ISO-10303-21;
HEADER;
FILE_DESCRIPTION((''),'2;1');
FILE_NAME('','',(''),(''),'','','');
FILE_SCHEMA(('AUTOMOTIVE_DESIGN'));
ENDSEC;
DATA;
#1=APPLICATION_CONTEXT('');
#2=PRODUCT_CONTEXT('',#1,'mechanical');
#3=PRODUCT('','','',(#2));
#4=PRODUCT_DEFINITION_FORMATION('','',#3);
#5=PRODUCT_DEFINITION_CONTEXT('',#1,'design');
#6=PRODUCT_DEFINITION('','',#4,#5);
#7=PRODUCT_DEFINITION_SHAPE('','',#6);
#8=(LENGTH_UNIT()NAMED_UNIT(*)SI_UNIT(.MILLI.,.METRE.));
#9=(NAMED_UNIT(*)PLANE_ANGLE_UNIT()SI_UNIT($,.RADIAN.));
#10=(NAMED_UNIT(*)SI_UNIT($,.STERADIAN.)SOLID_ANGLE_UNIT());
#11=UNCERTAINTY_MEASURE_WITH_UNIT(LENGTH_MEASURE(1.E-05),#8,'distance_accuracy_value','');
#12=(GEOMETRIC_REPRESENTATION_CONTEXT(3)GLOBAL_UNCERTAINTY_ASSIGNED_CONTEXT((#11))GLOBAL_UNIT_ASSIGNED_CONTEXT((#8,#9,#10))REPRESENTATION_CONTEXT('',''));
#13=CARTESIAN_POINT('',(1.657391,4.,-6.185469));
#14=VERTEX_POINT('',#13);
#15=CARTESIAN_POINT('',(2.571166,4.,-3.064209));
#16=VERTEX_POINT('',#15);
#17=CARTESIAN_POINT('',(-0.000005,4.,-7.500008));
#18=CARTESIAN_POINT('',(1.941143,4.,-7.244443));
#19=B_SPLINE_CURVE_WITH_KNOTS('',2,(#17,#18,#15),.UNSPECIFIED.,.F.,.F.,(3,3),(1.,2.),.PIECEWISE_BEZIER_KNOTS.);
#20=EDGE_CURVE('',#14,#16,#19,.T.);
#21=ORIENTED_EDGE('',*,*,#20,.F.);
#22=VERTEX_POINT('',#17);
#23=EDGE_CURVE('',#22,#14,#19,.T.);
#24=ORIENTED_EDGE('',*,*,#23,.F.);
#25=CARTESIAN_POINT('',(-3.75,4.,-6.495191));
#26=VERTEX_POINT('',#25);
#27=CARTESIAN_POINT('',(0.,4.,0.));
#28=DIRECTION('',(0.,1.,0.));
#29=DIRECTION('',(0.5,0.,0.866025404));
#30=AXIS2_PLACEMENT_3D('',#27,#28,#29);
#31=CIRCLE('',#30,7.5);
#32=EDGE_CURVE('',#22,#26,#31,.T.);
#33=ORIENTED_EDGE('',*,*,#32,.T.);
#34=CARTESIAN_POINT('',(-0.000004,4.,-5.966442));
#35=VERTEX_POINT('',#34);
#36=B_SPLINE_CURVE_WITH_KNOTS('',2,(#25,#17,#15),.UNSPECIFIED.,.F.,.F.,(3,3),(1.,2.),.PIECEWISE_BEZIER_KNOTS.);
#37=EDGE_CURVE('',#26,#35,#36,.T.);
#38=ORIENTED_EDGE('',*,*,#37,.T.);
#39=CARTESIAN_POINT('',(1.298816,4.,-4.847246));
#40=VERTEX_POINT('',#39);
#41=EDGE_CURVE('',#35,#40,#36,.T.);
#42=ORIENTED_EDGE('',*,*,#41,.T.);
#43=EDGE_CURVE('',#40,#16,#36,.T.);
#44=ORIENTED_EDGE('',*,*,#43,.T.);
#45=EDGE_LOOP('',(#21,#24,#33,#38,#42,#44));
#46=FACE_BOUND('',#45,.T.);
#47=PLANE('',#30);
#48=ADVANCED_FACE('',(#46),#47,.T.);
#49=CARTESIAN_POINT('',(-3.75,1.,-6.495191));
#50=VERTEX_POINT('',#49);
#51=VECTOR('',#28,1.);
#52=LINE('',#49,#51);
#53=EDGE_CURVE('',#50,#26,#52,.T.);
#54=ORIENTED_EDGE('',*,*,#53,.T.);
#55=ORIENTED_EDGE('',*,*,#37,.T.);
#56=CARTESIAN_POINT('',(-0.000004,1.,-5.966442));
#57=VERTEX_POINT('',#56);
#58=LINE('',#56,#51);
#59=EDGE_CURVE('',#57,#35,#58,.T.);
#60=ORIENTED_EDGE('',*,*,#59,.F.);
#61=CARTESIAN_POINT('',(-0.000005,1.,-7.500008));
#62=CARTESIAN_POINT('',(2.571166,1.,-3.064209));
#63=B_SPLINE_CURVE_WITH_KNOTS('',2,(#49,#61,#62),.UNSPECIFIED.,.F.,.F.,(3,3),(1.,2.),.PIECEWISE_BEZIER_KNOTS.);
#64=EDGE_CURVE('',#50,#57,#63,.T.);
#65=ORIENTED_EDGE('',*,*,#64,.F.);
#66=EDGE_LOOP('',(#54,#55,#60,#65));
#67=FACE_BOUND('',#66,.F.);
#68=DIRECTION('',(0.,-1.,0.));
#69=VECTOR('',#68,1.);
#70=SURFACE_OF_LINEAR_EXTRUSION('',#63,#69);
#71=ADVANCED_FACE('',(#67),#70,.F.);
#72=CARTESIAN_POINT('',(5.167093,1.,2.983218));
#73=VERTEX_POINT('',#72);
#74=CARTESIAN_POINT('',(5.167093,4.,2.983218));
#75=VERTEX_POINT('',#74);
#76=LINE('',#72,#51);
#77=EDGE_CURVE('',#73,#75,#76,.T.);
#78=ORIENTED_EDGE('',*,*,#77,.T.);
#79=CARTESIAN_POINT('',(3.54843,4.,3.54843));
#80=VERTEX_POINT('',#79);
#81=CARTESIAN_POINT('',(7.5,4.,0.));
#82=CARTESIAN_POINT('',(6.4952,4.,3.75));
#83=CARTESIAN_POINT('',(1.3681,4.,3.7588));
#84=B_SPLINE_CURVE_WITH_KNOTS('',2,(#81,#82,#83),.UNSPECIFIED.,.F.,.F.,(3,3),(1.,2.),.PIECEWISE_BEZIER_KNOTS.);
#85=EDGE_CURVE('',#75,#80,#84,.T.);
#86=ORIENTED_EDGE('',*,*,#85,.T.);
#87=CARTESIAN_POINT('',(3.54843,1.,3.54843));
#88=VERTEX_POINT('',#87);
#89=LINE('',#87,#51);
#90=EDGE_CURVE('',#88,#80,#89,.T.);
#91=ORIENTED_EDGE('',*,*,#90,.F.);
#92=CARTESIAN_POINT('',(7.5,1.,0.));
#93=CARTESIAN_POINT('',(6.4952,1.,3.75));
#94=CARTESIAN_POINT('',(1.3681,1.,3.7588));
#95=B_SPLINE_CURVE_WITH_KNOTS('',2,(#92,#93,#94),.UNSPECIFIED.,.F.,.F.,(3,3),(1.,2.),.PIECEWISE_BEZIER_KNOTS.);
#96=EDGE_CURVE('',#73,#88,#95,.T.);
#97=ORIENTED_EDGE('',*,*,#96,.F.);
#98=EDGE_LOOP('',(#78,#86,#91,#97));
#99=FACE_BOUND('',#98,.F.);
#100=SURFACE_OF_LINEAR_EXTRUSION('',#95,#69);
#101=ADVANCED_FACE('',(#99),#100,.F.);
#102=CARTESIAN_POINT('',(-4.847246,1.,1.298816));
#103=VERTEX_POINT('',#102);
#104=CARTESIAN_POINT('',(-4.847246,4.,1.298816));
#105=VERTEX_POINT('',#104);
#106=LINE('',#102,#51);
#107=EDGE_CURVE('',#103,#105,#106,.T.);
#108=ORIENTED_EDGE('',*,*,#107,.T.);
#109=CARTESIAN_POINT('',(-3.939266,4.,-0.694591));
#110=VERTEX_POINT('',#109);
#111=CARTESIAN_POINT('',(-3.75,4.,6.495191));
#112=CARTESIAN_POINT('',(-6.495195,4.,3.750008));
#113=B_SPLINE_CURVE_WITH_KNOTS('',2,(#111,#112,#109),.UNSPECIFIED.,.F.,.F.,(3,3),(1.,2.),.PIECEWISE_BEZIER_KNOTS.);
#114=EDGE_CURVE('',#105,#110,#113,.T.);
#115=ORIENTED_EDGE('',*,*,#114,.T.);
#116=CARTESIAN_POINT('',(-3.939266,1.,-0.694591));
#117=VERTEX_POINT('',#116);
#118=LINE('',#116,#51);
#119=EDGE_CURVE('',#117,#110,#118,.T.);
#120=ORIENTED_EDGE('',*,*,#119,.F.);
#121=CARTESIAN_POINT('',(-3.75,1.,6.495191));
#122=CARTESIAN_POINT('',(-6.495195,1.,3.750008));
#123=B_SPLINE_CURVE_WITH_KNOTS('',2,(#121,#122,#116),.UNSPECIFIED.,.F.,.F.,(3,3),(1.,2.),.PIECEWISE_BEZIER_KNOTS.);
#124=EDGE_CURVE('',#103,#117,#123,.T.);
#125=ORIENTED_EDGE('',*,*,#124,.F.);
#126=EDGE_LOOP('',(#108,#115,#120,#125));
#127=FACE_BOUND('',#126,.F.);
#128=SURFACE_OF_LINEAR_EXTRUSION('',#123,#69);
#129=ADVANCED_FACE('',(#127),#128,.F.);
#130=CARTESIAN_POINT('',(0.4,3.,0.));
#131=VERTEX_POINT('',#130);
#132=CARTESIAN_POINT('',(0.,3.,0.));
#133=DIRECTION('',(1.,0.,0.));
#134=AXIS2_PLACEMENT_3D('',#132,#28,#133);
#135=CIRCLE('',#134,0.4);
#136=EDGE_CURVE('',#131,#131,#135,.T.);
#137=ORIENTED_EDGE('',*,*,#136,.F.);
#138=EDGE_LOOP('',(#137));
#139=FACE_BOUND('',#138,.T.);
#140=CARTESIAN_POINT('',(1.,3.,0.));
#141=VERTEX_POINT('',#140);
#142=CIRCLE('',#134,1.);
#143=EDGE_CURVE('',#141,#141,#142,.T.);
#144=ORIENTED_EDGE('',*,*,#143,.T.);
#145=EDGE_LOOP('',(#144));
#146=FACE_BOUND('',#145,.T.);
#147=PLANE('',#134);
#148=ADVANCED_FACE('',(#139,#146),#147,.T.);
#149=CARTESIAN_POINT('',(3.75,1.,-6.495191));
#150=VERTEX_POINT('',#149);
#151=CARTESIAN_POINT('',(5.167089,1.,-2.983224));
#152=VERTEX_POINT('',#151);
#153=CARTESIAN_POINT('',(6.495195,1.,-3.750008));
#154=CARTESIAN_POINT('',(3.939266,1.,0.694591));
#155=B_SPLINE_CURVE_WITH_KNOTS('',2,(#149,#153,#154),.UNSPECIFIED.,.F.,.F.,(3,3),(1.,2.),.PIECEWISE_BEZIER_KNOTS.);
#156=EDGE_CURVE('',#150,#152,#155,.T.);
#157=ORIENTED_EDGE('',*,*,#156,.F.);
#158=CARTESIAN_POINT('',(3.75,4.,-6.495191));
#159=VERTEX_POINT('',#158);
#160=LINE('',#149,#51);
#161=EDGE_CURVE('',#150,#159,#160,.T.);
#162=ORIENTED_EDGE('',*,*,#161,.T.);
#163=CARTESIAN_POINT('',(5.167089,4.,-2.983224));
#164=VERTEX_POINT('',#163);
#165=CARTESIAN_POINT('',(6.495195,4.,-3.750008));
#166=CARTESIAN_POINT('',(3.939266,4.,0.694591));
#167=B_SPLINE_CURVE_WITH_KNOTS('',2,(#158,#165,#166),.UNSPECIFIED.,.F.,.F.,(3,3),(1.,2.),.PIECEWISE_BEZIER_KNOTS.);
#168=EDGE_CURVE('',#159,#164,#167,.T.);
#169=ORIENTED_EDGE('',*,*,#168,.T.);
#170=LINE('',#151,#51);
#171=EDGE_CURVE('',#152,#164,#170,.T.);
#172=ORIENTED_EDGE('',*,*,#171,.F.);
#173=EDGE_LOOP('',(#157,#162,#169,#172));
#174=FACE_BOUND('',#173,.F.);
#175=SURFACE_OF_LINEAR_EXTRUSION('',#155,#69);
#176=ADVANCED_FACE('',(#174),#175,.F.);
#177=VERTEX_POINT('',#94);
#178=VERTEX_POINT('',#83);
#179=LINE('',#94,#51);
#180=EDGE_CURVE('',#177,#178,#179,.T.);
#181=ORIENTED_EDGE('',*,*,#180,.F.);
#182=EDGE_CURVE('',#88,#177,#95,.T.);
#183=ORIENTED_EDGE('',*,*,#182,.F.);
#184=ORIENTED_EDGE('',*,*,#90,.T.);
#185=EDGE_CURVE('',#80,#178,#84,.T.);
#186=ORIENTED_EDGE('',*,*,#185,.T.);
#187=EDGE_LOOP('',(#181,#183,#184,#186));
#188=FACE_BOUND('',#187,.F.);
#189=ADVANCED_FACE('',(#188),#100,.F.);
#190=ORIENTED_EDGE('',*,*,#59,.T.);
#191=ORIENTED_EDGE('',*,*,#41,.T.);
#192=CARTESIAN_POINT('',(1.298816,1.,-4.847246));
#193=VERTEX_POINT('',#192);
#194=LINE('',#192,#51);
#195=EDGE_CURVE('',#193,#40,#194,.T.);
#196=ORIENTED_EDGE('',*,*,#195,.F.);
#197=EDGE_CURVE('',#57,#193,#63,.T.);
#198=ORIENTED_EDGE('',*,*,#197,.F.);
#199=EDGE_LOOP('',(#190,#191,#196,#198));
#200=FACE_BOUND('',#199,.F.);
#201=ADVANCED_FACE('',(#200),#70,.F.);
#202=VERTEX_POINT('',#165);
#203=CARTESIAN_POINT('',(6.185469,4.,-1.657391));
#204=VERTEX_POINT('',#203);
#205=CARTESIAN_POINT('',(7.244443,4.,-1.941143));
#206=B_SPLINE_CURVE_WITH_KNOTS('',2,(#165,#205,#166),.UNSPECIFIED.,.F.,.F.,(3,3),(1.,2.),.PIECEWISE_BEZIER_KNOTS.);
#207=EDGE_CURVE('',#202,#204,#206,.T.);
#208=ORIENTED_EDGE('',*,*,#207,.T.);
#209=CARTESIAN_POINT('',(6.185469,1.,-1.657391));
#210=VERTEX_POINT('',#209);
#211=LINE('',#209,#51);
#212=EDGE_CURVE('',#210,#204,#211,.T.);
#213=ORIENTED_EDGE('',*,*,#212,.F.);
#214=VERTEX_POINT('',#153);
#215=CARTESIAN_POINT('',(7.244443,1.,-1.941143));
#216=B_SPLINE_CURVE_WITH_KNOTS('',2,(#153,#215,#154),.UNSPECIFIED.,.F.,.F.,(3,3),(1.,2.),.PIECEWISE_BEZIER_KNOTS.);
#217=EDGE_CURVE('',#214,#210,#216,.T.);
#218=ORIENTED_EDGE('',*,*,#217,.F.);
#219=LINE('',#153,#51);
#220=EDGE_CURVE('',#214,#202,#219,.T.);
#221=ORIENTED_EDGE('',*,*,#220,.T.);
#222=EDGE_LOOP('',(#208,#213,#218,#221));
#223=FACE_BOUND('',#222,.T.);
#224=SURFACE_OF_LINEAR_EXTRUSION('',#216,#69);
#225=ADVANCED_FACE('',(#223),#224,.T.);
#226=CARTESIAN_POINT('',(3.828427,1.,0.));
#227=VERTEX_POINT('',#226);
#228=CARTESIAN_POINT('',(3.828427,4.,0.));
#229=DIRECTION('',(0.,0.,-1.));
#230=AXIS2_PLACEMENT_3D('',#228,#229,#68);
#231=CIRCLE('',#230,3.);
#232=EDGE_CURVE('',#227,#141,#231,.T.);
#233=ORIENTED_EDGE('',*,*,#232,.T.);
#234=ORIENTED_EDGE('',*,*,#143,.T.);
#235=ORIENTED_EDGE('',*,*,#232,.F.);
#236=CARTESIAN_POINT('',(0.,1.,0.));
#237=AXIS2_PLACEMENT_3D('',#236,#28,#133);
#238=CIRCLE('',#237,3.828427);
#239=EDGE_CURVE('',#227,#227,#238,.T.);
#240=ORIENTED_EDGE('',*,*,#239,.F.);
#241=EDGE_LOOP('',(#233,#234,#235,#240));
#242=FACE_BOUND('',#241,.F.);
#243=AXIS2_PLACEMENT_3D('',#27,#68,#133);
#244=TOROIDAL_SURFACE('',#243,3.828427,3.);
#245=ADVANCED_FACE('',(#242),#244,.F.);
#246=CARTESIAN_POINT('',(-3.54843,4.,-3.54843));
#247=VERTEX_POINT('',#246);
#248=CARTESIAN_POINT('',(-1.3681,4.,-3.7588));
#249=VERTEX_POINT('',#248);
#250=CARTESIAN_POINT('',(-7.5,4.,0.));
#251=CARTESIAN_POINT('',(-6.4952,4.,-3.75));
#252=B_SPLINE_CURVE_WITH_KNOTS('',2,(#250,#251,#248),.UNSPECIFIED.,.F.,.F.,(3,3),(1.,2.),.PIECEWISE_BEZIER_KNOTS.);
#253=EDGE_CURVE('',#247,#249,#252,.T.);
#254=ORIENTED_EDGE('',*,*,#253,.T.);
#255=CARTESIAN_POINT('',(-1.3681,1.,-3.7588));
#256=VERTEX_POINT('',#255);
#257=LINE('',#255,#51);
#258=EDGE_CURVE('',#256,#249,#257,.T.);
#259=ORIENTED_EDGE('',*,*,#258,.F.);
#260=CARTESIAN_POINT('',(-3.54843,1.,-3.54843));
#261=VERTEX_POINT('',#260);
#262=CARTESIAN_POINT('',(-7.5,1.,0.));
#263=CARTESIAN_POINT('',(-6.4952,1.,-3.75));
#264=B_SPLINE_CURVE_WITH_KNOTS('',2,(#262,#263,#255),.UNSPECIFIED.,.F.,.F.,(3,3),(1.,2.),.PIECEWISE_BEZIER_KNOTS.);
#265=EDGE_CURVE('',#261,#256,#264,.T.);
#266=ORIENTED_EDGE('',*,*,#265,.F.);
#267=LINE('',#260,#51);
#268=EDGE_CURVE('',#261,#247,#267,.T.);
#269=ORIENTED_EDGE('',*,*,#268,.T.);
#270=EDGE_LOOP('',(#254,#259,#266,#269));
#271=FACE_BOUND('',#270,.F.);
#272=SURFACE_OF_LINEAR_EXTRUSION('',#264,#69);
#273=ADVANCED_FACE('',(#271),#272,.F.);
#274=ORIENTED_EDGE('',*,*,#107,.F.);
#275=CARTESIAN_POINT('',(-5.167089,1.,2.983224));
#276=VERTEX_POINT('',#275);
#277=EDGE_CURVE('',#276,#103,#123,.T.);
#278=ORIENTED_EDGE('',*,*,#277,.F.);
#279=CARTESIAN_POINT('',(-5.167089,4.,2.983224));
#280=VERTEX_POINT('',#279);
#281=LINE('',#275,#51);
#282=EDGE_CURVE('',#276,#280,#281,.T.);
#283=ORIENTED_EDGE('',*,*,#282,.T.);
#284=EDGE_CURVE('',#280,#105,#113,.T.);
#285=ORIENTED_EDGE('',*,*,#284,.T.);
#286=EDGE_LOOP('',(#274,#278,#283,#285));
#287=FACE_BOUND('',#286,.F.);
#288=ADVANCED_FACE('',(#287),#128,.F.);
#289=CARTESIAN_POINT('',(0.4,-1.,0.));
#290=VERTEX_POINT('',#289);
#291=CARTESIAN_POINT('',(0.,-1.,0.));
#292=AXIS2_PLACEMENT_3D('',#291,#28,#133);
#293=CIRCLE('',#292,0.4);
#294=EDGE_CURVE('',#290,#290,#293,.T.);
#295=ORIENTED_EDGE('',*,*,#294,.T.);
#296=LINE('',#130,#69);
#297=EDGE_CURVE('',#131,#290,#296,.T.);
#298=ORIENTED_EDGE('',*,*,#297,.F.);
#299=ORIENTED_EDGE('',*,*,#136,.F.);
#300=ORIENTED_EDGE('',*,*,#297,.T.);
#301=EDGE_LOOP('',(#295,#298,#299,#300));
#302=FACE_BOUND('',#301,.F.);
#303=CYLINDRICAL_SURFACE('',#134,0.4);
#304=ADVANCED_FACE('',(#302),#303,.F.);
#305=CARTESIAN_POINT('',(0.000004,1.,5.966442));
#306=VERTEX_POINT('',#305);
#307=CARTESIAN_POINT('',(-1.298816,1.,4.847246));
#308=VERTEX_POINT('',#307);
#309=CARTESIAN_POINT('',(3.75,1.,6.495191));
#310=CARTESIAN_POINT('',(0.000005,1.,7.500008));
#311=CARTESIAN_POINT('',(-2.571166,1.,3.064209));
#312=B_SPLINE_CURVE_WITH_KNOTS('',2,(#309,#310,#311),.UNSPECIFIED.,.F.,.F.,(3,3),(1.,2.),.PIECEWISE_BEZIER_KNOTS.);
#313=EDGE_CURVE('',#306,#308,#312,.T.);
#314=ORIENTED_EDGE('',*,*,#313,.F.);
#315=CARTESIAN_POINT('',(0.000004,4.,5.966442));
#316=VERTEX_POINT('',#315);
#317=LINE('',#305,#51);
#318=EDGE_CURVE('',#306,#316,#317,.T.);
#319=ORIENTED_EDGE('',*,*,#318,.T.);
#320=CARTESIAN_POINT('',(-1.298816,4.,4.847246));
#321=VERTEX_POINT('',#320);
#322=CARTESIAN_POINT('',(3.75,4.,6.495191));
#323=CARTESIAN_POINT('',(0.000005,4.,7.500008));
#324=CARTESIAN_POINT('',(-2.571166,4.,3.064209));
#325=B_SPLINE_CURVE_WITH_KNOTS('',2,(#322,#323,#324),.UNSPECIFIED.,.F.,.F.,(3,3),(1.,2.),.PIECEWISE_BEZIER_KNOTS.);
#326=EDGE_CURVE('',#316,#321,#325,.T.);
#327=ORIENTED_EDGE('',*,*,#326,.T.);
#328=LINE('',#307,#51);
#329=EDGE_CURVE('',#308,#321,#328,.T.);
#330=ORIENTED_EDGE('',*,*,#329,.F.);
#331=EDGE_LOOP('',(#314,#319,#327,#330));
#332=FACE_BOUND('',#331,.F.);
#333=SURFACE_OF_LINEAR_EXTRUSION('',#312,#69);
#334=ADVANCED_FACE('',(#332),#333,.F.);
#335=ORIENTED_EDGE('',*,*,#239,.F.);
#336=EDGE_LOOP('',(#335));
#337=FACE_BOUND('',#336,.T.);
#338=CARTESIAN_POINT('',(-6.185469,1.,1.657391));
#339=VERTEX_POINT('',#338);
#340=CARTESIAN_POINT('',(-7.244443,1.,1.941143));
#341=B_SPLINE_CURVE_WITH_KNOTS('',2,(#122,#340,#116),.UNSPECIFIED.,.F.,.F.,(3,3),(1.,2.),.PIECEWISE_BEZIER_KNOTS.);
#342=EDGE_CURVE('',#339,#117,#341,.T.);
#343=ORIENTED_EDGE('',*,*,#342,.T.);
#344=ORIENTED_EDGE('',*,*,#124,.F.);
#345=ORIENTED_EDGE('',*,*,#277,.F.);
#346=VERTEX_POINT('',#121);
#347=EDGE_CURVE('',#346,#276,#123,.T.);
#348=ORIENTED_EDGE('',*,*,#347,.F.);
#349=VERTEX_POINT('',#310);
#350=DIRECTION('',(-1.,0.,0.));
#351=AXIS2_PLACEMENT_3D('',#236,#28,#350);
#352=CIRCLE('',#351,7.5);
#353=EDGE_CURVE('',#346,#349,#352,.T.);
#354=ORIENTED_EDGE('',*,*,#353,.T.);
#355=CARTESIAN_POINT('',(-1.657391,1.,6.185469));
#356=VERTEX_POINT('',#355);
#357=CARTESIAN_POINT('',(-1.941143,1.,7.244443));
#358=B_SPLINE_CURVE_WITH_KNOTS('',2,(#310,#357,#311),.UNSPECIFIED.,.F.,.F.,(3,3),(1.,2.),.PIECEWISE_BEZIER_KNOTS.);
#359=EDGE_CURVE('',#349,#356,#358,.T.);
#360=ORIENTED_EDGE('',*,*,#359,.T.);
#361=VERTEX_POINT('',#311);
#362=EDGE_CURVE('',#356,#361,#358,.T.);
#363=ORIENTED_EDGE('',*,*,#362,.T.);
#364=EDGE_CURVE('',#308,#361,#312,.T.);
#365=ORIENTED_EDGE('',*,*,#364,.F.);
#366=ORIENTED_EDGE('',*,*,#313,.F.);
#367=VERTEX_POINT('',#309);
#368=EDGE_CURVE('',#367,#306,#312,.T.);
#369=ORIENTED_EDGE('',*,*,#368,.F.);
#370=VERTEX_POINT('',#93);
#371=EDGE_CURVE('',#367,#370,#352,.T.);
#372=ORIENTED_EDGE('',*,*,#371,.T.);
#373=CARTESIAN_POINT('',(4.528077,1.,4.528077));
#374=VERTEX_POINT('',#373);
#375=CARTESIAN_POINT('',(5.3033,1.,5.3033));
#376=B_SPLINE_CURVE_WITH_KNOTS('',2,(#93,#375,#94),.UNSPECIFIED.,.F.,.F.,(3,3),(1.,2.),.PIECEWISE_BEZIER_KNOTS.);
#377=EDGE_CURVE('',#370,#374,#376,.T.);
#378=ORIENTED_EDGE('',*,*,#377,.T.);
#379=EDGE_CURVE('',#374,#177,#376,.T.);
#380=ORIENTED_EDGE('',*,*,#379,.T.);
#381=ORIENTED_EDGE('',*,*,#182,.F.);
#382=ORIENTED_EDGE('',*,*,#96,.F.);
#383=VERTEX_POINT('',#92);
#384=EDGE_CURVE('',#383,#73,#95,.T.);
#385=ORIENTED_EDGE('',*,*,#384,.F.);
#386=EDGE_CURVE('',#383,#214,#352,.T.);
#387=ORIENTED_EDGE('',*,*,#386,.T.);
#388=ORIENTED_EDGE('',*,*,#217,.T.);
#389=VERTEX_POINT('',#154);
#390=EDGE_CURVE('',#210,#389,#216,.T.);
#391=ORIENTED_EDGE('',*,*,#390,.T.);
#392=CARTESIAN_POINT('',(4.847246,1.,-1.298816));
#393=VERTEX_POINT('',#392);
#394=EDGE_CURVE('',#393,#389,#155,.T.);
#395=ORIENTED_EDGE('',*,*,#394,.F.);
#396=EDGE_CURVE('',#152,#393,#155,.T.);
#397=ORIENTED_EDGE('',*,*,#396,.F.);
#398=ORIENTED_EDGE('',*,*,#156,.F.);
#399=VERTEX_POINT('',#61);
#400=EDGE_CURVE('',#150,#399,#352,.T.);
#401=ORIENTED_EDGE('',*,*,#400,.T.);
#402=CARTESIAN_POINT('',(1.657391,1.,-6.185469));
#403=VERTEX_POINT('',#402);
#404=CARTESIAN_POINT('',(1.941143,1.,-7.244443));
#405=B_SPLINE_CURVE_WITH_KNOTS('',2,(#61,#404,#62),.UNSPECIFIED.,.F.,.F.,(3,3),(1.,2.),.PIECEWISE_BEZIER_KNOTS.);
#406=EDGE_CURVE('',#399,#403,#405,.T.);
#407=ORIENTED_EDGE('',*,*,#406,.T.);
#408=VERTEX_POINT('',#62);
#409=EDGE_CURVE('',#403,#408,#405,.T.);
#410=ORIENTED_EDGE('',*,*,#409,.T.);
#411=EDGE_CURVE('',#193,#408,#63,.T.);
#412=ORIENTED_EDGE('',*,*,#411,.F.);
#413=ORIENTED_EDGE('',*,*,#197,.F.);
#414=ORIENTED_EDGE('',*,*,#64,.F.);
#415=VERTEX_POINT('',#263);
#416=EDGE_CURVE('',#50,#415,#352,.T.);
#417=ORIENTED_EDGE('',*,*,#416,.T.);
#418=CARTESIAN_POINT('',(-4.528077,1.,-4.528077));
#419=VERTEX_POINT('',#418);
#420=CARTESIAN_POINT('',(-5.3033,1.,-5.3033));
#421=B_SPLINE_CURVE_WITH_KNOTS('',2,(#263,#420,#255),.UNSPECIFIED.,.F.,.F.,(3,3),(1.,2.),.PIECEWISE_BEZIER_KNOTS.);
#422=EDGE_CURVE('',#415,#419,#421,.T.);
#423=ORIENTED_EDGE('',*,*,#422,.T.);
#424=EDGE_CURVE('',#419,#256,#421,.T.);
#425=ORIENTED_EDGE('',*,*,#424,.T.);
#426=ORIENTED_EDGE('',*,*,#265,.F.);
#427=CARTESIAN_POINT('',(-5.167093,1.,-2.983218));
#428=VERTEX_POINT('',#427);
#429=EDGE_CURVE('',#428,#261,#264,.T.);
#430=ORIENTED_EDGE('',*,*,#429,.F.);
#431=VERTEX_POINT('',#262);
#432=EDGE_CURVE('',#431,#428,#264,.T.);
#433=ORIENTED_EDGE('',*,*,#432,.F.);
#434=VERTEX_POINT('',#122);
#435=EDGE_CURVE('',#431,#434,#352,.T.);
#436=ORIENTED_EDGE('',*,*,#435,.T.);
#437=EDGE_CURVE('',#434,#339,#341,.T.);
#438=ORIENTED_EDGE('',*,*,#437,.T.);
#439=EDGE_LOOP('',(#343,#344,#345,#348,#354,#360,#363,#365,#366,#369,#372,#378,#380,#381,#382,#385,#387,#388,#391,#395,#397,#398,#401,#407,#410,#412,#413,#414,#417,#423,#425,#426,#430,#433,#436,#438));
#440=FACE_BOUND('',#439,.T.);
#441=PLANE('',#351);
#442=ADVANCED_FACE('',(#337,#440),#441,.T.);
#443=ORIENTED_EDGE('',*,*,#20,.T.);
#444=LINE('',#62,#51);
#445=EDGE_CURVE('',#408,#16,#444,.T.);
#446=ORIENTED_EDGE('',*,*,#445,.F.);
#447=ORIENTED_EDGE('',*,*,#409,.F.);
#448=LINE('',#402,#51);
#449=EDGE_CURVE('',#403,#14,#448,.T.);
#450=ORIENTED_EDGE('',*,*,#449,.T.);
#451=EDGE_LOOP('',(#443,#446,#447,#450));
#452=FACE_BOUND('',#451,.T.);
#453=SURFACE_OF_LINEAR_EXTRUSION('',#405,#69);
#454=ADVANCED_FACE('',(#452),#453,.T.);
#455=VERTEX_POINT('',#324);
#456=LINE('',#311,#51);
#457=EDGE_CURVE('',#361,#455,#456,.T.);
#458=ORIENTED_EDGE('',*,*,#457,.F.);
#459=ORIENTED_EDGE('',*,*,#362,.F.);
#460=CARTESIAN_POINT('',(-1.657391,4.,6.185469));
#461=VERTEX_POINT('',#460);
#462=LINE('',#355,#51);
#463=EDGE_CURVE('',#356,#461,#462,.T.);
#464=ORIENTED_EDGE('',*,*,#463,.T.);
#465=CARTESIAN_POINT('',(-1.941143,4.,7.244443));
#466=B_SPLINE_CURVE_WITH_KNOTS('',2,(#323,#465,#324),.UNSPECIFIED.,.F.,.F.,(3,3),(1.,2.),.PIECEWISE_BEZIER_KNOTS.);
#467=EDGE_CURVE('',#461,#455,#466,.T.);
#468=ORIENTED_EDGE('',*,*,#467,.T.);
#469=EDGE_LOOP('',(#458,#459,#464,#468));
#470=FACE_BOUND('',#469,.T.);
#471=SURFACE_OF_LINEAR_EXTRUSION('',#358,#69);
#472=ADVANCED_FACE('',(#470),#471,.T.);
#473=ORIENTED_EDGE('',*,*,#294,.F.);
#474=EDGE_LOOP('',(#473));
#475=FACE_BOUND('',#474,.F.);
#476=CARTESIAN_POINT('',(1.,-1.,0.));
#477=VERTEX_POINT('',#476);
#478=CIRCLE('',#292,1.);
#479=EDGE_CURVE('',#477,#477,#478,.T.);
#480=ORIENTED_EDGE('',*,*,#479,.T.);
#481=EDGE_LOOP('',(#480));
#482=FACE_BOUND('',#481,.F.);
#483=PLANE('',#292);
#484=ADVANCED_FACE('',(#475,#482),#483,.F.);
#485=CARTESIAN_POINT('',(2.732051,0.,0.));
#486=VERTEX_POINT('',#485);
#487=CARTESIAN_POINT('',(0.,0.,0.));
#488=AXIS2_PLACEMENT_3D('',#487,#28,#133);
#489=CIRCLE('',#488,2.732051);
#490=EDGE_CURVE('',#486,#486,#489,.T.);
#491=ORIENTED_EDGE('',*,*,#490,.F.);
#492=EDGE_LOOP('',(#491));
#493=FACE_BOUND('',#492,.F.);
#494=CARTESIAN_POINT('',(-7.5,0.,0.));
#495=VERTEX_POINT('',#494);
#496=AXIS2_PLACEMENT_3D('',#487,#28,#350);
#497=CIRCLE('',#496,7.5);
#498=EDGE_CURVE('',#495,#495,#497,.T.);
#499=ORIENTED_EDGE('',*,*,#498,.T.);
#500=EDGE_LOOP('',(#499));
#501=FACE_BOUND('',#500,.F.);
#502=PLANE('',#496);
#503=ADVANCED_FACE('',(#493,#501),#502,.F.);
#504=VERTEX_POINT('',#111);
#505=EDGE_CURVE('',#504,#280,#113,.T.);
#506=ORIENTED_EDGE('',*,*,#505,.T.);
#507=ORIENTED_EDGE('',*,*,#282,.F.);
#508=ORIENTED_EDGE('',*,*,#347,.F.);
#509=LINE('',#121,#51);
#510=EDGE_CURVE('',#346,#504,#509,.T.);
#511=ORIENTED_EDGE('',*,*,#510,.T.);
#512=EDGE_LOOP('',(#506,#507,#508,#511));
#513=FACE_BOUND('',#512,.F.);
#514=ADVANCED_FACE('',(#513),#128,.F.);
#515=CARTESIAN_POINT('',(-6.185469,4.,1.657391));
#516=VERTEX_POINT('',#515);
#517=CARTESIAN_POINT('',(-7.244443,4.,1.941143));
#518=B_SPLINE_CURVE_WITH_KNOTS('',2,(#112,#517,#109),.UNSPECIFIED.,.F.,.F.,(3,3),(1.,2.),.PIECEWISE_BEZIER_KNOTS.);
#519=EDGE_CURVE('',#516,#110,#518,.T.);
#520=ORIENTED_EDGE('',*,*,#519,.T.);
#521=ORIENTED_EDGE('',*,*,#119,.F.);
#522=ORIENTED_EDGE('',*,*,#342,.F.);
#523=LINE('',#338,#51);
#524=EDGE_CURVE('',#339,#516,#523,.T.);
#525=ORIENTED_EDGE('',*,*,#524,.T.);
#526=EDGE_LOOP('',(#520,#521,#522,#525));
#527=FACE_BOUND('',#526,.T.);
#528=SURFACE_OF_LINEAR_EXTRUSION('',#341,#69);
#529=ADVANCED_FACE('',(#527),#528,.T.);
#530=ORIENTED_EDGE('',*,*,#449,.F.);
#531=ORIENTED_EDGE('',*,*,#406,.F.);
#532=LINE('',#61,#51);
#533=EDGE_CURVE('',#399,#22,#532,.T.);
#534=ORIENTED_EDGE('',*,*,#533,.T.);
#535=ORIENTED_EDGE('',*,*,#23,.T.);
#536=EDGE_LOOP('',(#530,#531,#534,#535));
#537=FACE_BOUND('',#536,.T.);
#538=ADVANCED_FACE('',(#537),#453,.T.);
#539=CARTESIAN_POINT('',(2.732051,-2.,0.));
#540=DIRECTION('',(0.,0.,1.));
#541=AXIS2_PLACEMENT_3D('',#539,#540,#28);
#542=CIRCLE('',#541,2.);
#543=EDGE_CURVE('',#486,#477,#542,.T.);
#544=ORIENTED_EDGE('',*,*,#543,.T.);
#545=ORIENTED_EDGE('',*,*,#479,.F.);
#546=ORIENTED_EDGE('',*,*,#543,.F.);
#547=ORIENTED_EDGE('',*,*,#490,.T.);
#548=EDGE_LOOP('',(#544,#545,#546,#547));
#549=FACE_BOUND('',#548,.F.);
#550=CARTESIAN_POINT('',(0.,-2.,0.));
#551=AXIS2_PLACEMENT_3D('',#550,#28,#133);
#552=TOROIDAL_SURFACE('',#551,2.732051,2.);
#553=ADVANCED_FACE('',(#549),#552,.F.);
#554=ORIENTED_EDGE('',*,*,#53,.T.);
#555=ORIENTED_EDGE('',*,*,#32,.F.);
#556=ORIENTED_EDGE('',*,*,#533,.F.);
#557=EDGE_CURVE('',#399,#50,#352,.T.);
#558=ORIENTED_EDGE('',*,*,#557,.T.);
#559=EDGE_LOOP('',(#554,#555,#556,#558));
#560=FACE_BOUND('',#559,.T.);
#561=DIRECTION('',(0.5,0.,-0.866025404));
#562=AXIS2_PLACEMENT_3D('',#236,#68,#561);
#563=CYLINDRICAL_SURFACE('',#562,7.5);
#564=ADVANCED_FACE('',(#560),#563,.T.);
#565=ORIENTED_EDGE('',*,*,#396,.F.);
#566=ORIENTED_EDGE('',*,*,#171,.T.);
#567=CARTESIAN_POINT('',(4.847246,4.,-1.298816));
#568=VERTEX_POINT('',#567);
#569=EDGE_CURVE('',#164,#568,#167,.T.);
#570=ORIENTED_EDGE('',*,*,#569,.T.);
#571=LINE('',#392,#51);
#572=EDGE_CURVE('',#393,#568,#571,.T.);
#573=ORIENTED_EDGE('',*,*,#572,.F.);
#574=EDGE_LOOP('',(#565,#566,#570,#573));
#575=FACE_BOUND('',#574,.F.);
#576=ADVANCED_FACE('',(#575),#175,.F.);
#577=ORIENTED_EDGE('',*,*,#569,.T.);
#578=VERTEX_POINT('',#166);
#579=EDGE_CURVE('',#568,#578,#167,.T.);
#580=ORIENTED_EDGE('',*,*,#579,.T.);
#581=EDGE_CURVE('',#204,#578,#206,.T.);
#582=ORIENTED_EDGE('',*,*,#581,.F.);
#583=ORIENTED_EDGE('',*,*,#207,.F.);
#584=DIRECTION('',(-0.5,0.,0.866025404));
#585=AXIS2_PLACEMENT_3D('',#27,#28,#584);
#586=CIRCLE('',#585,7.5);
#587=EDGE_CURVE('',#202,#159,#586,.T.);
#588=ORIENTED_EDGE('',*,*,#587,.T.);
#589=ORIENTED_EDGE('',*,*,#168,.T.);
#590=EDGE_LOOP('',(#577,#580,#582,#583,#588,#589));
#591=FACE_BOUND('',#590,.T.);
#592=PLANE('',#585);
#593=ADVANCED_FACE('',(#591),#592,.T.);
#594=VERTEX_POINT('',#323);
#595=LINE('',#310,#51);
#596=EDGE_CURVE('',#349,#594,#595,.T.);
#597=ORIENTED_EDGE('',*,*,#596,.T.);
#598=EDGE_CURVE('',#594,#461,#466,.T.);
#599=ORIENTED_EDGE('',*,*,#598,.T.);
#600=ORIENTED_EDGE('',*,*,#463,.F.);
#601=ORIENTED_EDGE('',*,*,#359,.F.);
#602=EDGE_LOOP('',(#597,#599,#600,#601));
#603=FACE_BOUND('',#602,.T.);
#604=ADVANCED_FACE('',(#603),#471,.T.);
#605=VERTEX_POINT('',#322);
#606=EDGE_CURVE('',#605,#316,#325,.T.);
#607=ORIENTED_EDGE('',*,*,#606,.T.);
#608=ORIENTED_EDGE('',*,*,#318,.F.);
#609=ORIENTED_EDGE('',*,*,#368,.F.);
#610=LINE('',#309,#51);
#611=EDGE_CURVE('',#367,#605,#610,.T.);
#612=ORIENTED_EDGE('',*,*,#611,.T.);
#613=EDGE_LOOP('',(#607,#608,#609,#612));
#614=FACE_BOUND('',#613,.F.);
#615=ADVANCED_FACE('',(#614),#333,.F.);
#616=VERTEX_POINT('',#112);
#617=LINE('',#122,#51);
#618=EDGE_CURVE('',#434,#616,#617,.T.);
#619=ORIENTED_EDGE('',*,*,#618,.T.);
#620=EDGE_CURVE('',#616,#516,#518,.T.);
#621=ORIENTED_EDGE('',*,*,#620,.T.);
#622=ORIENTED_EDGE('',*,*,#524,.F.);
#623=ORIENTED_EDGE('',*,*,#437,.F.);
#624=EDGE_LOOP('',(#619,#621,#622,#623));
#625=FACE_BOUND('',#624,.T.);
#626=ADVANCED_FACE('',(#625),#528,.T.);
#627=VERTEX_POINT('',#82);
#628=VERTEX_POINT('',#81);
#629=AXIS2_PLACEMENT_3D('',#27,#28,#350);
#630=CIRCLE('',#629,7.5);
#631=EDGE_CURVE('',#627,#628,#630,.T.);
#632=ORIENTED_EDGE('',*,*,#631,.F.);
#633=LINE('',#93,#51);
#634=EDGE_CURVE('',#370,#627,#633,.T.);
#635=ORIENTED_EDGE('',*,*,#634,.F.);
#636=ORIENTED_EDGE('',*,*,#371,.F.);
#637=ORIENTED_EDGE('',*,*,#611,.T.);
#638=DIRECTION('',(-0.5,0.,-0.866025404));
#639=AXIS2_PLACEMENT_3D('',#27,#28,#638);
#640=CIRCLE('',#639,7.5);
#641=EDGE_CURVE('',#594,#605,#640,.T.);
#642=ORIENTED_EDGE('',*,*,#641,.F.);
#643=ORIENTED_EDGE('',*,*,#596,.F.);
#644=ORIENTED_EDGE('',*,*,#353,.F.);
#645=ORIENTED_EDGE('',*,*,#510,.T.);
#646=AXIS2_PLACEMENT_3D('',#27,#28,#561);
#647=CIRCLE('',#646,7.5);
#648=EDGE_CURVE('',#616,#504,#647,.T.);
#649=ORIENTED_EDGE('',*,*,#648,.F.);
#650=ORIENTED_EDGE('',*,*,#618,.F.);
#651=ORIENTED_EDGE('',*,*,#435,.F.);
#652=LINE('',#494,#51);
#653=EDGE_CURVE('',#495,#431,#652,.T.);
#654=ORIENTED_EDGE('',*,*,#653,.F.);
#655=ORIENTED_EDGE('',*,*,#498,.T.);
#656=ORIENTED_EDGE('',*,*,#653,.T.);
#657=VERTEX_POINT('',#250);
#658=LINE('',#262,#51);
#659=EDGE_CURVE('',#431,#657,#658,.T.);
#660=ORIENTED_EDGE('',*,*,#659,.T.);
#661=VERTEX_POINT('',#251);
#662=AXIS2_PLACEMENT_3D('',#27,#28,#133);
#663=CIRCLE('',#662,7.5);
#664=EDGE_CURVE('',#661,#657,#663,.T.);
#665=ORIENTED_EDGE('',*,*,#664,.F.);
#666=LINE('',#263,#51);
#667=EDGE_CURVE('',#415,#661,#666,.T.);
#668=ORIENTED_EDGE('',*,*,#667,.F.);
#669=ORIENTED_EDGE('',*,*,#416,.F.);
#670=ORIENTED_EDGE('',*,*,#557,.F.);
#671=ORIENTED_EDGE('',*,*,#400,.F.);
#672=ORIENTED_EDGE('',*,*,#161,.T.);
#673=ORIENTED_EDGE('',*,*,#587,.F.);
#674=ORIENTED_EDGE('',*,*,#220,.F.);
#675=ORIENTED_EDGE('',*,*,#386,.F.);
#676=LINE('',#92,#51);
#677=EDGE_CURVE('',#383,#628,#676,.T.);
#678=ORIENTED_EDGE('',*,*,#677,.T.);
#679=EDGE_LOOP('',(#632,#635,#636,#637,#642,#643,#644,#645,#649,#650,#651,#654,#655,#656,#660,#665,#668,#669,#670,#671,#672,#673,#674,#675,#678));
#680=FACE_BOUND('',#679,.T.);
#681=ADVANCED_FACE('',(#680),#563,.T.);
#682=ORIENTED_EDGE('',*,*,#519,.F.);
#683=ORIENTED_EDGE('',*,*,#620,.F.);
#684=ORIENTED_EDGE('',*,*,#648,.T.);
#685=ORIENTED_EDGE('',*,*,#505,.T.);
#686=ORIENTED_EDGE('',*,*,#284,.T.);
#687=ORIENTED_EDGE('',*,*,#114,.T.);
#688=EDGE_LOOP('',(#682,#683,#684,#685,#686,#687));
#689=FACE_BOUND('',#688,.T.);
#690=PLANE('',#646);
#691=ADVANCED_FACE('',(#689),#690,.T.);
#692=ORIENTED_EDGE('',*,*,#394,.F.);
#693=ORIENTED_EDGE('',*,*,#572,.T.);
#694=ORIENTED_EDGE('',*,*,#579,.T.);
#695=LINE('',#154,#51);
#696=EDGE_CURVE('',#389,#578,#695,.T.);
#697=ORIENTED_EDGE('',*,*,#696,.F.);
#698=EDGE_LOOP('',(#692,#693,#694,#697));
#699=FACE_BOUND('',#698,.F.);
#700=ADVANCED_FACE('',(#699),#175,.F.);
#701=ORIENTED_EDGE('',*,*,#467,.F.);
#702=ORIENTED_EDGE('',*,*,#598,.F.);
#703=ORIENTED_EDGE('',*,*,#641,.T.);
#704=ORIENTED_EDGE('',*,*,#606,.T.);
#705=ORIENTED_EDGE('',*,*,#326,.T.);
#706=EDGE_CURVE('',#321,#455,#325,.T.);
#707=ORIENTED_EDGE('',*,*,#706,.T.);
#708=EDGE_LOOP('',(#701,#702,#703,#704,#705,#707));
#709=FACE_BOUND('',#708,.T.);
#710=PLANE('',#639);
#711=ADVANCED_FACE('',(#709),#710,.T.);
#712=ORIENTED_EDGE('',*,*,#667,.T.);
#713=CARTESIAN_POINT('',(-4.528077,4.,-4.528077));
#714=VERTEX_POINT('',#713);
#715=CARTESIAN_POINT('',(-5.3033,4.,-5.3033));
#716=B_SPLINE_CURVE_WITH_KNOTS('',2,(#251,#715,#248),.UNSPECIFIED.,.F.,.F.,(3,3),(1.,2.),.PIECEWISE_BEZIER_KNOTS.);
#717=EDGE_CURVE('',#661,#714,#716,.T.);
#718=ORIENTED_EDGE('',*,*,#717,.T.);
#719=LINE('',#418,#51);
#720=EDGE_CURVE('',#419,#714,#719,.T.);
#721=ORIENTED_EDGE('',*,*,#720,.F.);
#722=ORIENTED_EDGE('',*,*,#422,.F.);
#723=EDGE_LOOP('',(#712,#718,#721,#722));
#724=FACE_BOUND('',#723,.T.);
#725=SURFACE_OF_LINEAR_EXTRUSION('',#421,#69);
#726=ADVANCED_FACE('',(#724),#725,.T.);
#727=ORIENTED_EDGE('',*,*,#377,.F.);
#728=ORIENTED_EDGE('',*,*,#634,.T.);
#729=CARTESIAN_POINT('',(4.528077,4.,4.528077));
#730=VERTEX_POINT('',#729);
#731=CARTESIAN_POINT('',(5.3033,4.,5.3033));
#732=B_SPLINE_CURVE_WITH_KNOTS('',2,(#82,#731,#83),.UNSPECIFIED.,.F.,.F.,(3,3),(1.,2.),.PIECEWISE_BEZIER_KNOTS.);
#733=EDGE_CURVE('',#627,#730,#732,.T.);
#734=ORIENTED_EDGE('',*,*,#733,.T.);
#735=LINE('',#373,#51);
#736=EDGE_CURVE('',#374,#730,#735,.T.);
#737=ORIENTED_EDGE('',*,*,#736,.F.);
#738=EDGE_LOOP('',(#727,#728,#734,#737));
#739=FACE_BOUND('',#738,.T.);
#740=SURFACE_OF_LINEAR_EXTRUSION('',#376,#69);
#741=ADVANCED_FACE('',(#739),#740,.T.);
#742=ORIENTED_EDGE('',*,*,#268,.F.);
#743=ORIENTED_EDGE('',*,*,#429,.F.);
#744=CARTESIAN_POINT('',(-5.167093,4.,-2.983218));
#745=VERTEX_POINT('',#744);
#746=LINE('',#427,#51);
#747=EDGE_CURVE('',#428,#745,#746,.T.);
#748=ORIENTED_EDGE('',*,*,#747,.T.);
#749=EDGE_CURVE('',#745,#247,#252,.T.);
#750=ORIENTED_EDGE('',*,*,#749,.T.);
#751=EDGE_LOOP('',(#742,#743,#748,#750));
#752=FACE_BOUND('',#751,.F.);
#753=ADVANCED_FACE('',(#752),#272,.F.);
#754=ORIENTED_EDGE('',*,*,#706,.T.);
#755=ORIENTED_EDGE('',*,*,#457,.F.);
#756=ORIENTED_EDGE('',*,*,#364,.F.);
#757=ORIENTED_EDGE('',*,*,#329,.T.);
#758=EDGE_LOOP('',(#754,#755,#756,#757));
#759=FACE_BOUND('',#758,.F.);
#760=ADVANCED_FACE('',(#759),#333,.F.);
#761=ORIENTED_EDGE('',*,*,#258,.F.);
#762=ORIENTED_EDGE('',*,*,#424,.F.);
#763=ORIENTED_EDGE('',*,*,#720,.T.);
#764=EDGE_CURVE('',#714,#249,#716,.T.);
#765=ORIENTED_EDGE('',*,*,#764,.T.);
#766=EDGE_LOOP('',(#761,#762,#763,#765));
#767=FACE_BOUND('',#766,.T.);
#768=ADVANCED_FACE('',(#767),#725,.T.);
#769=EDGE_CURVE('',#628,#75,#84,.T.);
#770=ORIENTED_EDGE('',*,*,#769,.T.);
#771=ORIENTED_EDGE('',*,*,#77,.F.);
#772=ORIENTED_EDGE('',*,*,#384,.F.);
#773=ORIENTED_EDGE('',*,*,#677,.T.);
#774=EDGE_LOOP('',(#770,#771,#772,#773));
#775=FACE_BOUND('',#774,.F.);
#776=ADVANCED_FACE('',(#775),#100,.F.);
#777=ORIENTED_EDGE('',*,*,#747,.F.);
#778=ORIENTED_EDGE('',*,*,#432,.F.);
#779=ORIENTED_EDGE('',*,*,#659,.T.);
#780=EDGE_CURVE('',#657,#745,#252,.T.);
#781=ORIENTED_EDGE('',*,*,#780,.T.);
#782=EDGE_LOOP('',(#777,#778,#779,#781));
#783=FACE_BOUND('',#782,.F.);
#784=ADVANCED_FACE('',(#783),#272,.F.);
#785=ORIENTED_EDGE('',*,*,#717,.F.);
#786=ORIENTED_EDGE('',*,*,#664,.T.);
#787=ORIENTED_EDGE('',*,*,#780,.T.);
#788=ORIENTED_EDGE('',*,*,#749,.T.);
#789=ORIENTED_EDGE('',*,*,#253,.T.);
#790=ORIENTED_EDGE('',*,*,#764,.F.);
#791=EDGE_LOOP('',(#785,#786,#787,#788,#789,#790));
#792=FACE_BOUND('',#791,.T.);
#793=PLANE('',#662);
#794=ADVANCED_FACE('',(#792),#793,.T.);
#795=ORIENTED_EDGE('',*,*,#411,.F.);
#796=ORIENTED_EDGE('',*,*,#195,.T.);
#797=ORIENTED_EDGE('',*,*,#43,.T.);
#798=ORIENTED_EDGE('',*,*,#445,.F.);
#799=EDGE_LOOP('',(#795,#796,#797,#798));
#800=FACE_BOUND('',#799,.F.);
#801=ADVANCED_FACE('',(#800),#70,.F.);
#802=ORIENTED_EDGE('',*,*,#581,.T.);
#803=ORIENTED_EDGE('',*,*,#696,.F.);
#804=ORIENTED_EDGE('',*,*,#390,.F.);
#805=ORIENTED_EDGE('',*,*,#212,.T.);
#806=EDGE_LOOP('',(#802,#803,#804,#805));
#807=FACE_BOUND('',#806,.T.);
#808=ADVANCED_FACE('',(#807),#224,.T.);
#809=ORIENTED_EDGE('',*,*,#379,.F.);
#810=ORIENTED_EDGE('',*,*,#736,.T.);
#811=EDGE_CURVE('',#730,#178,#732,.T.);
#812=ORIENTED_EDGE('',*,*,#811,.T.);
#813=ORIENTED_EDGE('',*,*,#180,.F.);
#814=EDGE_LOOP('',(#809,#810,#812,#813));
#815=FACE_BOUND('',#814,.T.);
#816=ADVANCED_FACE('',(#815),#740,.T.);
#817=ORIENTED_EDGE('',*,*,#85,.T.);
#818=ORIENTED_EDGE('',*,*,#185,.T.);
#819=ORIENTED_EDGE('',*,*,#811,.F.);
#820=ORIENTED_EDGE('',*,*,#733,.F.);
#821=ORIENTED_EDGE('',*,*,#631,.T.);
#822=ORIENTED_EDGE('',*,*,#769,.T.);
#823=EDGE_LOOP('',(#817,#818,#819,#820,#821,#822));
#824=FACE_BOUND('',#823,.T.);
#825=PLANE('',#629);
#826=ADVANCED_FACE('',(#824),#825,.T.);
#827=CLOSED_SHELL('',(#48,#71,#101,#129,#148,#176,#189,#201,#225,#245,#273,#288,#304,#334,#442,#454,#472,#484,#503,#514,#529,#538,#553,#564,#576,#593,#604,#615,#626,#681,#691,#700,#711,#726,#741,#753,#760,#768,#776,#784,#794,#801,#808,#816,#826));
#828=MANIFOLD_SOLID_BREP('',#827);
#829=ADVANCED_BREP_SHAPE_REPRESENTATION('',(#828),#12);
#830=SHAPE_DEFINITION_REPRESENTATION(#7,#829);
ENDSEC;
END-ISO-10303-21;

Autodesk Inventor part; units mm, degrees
ref_plane "YZ Plane" through (0, 0, 0) normal (1, 0, 0) x (0, 1, 0)
ref_plane "XZ Plane" through (0, 0, 0) normal (0, 1, 0) x (-1, 0, 0)
ref_plane "XY Plane" through (0, 0, 0) normal (0, 0, 1) x (1, 0, 0)
sketch "スケッチ1" plane through (0, 0, 0) normal (0, 1, 0) x (-1, 0, 0)
  circle A0 centre (0, 0) radius 7.5
  dimension "d0" = 15
extrude "押し出し1" add sketch "スケッチ1" along normal blind 1
sketch "スケッチ2" plane through (0, 1, 0) normal (0, 1, 0) x (1, 0, 0)
  circle A0 centre (0, 0) radius 7.5 projected
  line L0 (0, 0) -> (-7.5, 0)
  line L1 (0, 0) -> (-1.3681, 3.7588)
  line L2 (-7.5, 0) -> (-6.4952, 3.75) construction
  line L3 (-6.4952, 3.75) -> (-1.3681, 3.7588) construction
  spline S0 degree 2 poles (-7.5, 0) (-6.4952, 3.75) (-1.3681, 3.7588) knots 1 1 1 2 2 2
  line L4 (-6.4952, 3.75) -> (-5.3033, 5.3033) construction
  line L5 (-5.3033, 5.3033) -> (-1.3681, 3.7588) construction
  spline S1 degree 2 poles (-6.4952, 3.75) (-5.3033, 5.3033) (-1.3681, 3.7588) knots 1 1 1 2 2 2
  line L6 (0, 0) -> (-5.3033, 5.3033)
  line L7 (-6.4952, 3.75) -> (0, 0)
  point P0 (-6.4952, 3.75)
  dimension "d5" = 70
  dimension "d14" = 4
  dimension "d18" = 25
  dimension "d19" = 15
extrude "押し出し2" add sketch "スケッチ2" along normal blind 3 contours A0 L7 S0 | S1 L6 S0 L7 | S1 S0 L6
pattern_circular "円形状パターン1" count 6 over 360 about axis through (0, 1, 0) along (0, 1, 0) of "押し出し2"
sketch "スケッチ4" plane through (0, 1, 0) normal (0, 1, 0) x (1, 0, 0)
  circle A0 centre (0, 0) radius 1
  dimension "d20" = 2
extrude "押し出し4" add sketch "スケッチ4" along normal blind 2 and the other way blind 2
fillet "フィレット1" radius 3 1 edges at (-1, 1, 0)
sketch "スケッチ5" plane through (0, 3, 0) normal (0, 1, 0) x (1, 0, 0)
  circle A0 centre (0, 0) radius 0.4
  dimension "d24" = 0.8
extrude "押し出し5" cut sketch "スケッチ5" against normal through all
fillet "フィレット2" radius 2 1 edges at (-1, 0, 0)
properties part number "Fan2"
